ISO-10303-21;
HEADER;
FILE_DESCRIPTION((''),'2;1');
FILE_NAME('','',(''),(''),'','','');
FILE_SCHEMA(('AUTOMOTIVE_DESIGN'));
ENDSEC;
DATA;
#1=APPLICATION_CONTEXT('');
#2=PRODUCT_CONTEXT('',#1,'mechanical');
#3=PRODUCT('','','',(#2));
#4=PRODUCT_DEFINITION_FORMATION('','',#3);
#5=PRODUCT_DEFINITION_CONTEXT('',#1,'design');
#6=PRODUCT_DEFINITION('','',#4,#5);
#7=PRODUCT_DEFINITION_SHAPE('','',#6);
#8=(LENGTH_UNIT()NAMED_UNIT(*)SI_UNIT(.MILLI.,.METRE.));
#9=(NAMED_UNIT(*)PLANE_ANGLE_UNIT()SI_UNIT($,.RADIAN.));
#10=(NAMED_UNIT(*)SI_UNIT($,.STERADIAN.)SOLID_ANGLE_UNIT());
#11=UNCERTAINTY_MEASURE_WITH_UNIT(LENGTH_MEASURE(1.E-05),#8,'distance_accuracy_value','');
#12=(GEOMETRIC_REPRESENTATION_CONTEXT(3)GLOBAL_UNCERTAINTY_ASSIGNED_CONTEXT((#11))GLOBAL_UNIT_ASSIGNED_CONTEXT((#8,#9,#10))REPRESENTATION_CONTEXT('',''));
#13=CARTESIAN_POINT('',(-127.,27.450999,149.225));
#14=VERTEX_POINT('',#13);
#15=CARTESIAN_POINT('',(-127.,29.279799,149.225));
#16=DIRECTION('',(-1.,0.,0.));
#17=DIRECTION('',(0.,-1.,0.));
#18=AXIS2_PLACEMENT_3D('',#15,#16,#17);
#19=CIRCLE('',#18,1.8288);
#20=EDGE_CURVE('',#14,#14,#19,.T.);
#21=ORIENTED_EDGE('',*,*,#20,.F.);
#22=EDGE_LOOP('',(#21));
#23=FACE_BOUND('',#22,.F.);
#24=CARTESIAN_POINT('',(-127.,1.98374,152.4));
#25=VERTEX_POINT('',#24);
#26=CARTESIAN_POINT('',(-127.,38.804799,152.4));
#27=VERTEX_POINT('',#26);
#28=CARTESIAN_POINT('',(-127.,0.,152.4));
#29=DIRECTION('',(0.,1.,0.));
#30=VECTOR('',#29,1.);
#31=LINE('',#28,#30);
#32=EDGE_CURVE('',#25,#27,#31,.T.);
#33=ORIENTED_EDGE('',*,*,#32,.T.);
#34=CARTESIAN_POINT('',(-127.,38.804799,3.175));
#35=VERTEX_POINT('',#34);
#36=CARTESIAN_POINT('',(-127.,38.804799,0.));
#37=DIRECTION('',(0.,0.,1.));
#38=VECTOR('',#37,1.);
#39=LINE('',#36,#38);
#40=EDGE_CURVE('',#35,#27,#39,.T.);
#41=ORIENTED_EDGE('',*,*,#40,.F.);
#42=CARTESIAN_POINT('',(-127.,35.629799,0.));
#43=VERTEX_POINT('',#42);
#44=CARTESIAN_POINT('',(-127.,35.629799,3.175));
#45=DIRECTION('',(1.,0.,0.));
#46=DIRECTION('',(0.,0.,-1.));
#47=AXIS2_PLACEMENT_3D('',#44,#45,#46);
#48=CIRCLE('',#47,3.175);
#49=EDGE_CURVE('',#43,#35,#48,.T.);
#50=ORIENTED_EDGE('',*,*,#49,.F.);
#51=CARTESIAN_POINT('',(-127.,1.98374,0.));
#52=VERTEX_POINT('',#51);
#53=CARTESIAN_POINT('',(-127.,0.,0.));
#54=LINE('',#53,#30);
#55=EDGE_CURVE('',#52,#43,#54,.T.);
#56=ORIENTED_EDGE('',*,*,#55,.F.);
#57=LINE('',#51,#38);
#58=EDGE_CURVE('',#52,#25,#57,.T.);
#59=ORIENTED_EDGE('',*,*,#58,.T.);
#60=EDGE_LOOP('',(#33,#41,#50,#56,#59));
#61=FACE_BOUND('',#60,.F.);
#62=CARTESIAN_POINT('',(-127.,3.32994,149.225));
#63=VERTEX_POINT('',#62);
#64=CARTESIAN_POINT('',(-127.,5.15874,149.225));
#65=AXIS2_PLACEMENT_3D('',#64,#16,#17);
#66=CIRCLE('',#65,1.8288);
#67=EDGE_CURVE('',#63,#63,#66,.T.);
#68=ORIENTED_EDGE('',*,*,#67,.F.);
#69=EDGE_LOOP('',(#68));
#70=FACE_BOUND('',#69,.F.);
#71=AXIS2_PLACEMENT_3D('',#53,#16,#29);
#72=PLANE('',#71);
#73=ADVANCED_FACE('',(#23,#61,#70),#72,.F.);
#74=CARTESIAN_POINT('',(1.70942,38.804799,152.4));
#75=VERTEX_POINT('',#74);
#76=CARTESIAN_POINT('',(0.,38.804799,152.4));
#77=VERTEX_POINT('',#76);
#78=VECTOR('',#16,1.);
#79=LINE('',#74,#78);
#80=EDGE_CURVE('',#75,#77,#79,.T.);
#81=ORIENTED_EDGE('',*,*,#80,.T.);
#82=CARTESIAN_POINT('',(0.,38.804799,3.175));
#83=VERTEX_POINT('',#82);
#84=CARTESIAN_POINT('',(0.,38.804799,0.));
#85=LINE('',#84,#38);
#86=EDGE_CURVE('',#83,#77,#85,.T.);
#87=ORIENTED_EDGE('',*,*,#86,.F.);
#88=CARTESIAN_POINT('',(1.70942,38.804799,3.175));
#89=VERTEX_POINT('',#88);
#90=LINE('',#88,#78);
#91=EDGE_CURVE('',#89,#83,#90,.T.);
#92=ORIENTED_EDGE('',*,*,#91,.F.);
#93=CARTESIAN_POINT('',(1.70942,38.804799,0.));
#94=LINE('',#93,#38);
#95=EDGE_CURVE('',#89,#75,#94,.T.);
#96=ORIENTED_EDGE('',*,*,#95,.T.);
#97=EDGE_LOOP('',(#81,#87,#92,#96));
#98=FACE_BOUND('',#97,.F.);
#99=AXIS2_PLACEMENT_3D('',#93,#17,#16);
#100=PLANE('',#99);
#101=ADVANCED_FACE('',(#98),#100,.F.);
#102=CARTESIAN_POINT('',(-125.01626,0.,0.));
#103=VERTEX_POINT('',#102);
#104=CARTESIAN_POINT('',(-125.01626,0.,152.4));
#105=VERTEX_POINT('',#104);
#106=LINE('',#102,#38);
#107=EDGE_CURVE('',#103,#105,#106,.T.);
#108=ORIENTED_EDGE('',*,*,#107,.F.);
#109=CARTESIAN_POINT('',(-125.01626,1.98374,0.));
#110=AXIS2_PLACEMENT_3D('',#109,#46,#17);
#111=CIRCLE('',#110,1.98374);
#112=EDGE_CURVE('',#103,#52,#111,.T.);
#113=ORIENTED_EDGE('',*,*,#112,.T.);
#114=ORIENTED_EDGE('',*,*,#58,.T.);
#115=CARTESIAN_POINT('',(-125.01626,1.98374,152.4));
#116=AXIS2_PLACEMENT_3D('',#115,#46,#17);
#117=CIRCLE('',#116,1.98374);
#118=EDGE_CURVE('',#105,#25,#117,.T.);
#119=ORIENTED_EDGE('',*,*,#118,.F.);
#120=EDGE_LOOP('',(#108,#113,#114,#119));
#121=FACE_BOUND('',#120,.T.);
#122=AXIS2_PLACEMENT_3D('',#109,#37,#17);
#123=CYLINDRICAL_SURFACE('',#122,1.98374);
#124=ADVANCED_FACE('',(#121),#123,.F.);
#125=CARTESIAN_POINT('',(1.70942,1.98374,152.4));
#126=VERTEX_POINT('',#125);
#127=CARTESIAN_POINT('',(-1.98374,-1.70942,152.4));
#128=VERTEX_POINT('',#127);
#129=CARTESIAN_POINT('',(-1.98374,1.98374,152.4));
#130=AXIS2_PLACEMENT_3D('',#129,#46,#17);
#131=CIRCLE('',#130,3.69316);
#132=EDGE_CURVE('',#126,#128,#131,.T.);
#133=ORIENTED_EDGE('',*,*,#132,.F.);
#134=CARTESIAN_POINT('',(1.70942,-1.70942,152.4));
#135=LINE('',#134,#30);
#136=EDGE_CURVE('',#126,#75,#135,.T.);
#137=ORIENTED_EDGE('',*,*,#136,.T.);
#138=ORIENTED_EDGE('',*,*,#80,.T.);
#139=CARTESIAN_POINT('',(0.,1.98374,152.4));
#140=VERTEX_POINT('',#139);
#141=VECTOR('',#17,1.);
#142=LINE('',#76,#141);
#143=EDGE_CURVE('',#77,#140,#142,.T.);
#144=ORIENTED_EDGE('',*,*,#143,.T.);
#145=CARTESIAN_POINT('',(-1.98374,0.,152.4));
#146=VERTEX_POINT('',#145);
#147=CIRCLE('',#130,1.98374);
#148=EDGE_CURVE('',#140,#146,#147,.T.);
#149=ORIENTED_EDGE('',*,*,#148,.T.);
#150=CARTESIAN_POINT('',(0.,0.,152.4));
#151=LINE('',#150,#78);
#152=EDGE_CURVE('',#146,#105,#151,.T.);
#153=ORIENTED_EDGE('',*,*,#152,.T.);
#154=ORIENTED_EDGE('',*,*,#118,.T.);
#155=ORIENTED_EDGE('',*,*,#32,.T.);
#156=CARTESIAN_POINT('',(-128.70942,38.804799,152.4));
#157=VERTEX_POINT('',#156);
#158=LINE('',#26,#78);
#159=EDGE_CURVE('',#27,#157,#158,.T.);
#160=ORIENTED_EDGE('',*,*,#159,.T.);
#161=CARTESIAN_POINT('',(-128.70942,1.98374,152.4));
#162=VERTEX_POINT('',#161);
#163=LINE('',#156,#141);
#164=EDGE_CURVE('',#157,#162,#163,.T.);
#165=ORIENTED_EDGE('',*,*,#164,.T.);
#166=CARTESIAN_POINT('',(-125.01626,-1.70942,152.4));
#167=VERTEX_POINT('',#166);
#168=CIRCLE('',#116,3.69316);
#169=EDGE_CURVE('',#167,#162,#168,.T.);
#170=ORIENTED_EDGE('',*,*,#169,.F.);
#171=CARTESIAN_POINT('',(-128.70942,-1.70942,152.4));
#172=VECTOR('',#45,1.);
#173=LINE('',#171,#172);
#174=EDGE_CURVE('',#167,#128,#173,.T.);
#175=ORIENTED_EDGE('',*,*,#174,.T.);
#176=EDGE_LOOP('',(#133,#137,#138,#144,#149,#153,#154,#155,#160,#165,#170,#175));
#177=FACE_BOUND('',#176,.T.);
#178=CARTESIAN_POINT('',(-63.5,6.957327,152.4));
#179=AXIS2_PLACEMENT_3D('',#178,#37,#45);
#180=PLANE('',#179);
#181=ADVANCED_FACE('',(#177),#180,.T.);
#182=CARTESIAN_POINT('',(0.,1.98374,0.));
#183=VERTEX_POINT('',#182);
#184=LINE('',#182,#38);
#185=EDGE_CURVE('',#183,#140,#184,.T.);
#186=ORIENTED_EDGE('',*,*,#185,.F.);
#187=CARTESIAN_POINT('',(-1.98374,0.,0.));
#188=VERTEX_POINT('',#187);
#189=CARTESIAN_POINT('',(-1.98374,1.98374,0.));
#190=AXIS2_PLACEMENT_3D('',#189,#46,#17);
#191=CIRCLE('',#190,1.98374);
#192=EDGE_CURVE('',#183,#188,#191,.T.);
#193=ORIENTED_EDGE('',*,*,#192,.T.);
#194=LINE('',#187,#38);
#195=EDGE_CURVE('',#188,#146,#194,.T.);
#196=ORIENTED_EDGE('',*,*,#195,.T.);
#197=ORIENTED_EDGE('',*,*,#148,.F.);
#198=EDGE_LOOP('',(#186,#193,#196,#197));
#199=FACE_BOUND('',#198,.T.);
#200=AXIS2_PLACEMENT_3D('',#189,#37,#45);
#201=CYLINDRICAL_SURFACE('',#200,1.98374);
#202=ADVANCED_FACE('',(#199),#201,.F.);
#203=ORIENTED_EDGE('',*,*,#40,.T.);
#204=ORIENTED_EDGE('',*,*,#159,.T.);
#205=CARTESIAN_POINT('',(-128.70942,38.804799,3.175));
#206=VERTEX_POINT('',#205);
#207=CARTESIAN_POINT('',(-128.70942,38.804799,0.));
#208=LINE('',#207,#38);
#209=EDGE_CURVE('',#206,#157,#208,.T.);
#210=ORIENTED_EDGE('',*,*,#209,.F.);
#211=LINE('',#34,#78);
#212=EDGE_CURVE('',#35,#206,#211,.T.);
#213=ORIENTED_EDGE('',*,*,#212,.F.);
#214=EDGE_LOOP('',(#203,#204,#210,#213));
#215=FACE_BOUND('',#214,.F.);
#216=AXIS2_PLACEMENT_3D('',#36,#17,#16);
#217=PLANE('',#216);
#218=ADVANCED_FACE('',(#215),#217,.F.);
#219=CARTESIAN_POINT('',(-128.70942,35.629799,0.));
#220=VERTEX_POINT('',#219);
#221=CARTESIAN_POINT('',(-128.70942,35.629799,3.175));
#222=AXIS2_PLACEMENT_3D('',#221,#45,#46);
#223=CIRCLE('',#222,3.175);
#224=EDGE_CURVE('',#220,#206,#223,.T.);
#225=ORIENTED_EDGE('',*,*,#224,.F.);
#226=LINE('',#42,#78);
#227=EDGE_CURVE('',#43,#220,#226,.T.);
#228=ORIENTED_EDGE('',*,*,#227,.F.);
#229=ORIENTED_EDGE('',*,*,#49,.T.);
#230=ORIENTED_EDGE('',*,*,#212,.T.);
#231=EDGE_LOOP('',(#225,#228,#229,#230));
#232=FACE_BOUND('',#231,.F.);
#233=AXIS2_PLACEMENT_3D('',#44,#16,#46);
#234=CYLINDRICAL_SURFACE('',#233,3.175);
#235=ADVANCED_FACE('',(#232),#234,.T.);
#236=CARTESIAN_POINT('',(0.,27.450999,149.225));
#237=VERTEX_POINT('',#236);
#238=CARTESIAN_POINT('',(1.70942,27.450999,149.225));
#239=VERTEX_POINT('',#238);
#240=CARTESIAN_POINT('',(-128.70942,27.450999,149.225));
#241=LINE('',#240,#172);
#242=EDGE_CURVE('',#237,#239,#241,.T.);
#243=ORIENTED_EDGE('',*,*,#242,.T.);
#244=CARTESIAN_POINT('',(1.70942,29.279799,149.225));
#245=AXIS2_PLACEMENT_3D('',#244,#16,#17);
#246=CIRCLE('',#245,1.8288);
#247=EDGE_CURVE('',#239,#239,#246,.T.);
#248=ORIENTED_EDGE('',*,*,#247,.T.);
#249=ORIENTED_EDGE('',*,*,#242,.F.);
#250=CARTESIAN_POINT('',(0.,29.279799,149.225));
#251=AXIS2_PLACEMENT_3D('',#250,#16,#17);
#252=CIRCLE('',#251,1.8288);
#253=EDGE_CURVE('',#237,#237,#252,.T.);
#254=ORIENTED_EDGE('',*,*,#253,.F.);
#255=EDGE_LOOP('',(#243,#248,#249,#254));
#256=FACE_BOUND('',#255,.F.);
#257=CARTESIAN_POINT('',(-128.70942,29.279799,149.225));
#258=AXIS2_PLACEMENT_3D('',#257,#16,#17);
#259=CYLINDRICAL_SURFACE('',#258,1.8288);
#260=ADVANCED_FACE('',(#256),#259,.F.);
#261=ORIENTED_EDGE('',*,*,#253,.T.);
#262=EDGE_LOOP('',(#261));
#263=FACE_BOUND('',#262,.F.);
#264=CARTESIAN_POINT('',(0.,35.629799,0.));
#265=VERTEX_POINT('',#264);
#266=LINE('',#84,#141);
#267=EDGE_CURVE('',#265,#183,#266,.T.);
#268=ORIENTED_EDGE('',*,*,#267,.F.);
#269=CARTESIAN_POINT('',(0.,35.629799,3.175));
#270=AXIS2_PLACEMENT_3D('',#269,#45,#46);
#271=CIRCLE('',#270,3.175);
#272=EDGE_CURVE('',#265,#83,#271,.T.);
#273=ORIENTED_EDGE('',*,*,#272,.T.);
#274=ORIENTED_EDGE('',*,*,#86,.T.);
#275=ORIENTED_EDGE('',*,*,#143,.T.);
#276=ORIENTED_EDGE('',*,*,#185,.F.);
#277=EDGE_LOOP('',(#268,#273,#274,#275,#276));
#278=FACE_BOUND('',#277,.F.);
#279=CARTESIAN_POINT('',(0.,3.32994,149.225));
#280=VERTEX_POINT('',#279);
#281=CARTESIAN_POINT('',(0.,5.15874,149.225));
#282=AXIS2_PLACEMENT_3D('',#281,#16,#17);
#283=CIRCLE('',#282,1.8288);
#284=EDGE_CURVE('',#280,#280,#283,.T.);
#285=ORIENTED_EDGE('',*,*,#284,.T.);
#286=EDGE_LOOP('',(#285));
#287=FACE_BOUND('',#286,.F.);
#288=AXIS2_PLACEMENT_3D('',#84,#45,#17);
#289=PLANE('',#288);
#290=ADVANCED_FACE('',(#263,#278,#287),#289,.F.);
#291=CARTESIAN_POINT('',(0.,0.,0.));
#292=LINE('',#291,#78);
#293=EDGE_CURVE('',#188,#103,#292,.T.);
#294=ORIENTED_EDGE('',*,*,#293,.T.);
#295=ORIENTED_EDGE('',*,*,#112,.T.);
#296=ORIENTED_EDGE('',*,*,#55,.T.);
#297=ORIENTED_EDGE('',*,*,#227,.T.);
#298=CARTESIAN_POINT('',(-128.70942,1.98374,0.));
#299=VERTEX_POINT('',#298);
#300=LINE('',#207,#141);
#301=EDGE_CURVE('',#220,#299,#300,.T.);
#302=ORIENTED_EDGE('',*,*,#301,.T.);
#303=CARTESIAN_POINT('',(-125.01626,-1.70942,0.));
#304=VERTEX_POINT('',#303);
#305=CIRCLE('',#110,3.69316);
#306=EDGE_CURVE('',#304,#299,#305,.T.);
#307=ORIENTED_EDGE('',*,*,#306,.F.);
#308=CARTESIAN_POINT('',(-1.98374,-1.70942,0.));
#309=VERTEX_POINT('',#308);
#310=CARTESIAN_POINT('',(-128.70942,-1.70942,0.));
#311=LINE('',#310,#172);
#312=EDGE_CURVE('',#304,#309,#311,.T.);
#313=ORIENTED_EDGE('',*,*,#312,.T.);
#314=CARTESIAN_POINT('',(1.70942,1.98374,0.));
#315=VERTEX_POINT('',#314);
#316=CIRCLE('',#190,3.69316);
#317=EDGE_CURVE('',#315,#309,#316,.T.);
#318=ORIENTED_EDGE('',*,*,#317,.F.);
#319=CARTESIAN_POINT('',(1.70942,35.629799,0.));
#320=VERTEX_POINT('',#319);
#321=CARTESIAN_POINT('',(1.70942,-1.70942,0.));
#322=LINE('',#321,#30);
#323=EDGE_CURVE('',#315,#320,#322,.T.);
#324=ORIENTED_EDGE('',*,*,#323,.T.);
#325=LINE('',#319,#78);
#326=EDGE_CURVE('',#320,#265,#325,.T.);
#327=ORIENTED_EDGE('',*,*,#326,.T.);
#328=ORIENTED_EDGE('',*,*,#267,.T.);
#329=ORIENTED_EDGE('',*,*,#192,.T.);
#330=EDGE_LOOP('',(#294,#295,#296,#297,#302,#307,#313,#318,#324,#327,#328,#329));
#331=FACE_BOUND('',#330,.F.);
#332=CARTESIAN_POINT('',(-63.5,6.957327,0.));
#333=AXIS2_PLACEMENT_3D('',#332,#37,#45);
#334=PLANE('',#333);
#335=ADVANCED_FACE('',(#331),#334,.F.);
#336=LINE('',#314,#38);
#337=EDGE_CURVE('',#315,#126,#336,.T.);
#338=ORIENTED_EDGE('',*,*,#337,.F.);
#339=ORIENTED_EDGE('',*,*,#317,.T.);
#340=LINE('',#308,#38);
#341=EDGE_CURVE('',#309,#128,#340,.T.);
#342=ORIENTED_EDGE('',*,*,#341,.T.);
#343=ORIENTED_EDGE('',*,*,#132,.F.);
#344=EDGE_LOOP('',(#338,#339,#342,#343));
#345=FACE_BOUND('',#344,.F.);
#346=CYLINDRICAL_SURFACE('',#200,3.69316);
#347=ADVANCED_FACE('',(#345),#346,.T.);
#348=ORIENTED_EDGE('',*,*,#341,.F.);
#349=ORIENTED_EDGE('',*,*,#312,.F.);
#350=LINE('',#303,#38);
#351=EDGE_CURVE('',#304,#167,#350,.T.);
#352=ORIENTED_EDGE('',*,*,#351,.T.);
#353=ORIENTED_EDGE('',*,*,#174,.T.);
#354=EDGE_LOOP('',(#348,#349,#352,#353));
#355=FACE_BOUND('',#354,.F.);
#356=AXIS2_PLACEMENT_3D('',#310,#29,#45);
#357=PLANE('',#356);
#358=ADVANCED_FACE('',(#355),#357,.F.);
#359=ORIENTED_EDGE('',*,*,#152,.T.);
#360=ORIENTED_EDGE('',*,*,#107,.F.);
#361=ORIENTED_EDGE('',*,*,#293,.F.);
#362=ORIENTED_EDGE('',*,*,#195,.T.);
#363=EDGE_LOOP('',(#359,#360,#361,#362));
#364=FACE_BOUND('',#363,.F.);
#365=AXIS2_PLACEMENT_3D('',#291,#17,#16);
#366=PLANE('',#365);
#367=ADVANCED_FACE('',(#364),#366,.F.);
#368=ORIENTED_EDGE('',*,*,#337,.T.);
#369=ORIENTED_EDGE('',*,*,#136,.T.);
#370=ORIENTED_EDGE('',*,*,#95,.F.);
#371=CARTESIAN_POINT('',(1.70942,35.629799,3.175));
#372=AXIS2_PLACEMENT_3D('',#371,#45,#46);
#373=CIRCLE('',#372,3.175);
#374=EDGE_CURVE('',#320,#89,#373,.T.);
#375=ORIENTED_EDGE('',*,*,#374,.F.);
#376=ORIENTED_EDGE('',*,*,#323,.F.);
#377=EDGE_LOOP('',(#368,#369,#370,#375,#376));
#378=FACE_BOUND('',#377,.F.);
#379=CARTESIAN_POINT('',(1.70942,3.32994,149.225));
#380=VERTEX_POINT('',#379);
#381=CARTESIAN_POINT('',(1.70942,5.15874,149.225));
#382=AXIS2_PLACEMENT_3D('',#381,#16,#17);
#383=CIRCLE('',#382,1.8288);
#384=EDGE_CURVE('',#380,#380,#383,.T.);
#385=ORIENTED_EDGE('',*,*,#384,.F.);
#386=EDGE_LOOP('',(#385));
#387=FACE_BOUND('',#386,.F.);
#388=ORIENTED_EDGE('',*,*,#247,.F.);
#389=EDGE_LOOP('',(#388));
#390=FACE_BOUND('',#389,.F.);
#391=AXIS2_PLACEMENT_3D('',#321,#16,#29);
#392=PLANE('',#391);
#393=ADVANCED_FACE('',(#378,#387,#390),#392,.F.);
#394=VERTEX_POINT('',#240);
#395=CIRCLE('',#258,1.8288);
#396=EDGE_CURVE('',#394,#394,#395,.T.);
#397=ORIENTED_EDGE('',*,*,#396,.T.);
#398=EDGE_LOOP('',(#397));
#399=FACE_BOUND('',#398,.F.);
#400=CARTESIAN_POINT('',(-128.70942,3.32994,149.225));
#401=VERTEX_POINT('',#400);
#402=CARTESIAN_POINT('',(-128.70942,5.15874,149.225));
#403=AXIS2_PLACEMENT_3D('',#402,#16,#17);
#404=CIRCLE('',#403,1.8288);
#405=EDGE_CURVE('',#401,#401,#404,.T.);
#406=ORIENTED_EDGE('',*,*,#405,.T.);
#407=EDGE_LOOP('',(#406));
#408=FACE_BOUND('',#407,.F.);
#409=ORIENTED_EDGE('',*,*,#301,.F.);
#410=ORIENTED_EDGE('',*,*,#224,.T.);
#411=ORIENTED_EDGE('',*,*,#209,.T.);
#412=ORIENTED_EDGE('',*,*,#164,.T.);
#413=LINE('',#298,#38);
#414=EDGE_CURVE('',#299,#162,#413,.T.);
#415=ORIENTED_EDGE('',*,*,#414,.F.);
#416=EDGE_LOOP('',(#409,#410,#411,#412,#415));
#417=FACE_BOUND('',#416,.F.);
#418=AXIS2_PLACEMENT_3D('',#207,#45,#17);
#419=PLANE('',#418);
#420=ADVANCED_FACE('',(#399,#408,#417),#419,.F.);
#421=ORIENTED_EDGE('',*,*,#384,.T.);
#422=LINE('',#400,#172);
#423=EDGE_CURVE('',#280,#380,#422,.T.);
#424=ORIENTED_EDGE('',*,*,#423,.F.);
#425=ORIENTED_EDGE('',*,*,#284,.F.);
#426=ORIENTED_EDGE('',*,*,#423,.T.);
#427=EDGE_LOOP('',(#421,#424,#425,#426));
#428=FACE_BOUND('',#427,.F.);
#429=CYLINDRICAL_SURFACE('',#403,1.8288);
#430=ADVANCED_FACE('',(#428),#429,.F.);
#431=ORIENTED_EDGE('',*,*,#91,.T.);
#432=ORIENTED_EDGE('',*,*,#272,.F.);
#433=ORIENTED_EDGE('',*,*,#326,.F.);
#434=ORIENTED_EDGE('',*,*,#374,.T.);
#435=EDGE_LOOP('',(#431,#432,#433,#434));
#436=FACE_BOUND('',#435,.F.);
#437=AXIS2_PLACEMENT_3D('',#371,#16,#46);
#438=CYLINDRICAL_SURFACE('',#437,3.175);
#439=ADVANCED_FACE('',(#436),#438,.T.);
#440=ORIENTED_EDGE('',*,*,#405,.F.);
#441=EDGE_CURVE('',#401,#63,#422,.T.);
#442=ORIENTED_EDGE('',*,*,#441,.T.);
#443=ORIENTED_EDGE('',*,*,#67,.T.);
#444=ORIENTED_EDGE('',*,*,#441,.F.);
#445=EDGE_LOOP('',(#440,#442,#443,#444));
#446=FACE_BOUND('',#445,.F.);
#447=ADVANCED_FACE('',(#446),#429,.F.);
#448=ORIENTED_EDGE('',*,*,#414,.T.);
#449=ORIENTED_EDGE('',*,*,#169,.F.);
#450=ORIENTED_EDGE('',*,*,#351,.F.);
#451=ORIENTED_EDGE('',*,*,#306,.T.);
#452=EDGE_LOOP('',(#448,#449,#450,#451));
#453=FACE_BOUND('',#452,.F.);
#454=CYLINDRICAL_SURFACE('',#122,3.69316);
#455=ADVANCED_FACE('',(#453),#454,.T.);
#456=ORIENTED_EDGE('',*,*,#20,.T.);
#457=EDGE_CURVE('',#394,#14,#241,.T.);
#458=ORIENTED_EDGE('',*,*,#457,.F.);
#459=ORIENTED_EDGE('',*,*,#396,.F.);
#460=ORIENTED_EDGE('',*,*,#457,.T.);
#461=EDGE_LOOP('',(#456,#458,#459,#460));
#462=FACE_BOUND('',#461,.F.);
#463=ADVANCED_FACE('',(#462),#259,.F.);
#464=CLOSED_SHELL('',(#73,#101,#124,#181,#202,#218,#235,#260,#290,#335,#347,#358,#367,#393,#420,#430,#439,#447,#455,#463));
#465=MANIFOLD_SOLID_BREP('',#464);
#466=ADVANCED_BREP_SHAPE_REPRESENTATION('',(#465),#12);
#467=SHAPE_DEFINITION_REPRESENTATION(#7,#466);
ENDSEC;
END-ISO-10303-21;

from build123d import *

# Parameters (mm, degrees)
F1_DEPTH = 152.4
F2_R     = 1.98374
F3_R     = 3.69316
F4_R     = 1.8288
F5_DEPTH = 130.41884
F6_R     = 3.175


with BuildPart() as f1:
    # F0 (on Top) → F1 (new body)
    with BuildSketch(Plane.XY):
        Polygon((0, 38.8047992), (0, 0), (-127, 0), (-127, 38.8047992), (-128.70942, 38.8047992), (-128.70942, -1.70942), (1.70942, -1.70942), (1.70942, 38.8047992), align=None)
    extrude(amount=F1_DEPTH)

    # F2
    f2_edges = [f1.edges().sort_by_distance(p)[0] for p in [
        (0, 0, 76.2),
        (-127, 0, 76.2),
    ]]
    fillet(f2_edges, radius=F2_R)

    # F3
    f3_edges = [f1.edges().sort_by_distance(p)[0] for p in [
        (1.70942, -1.70942, 76.2),
        (-128.70942, -1.70942, 76.2),
    ]]
    fillet(f3_edges, radius=F3_R)

    # F4 (on face) → F5 (cut, through all)
    with BuildSketch(Plane(origin=(-128.70942, 0, 0), x_dir=(0, -1, 0), z_dir=(-1, 0, 0))):
        with Locations((-29.2797992, 149.225)):
            Circle(F4_R)
        with Locations((-5.15874, 149.225)):
            Circle(F4_R)
    extrude(amount=-F5_DEPTH, mode=Mode.SUBTRACT)

    # F6
    f6_edges = [f1.edges().sort_by_distance(p)[0] for p in [
        (0.85471, 38.804799, 0),
        (-127.85471, 38.804799, 0),
    ]]
    fillet(f6_edges, radius=F6_R)


solid = f1.part
